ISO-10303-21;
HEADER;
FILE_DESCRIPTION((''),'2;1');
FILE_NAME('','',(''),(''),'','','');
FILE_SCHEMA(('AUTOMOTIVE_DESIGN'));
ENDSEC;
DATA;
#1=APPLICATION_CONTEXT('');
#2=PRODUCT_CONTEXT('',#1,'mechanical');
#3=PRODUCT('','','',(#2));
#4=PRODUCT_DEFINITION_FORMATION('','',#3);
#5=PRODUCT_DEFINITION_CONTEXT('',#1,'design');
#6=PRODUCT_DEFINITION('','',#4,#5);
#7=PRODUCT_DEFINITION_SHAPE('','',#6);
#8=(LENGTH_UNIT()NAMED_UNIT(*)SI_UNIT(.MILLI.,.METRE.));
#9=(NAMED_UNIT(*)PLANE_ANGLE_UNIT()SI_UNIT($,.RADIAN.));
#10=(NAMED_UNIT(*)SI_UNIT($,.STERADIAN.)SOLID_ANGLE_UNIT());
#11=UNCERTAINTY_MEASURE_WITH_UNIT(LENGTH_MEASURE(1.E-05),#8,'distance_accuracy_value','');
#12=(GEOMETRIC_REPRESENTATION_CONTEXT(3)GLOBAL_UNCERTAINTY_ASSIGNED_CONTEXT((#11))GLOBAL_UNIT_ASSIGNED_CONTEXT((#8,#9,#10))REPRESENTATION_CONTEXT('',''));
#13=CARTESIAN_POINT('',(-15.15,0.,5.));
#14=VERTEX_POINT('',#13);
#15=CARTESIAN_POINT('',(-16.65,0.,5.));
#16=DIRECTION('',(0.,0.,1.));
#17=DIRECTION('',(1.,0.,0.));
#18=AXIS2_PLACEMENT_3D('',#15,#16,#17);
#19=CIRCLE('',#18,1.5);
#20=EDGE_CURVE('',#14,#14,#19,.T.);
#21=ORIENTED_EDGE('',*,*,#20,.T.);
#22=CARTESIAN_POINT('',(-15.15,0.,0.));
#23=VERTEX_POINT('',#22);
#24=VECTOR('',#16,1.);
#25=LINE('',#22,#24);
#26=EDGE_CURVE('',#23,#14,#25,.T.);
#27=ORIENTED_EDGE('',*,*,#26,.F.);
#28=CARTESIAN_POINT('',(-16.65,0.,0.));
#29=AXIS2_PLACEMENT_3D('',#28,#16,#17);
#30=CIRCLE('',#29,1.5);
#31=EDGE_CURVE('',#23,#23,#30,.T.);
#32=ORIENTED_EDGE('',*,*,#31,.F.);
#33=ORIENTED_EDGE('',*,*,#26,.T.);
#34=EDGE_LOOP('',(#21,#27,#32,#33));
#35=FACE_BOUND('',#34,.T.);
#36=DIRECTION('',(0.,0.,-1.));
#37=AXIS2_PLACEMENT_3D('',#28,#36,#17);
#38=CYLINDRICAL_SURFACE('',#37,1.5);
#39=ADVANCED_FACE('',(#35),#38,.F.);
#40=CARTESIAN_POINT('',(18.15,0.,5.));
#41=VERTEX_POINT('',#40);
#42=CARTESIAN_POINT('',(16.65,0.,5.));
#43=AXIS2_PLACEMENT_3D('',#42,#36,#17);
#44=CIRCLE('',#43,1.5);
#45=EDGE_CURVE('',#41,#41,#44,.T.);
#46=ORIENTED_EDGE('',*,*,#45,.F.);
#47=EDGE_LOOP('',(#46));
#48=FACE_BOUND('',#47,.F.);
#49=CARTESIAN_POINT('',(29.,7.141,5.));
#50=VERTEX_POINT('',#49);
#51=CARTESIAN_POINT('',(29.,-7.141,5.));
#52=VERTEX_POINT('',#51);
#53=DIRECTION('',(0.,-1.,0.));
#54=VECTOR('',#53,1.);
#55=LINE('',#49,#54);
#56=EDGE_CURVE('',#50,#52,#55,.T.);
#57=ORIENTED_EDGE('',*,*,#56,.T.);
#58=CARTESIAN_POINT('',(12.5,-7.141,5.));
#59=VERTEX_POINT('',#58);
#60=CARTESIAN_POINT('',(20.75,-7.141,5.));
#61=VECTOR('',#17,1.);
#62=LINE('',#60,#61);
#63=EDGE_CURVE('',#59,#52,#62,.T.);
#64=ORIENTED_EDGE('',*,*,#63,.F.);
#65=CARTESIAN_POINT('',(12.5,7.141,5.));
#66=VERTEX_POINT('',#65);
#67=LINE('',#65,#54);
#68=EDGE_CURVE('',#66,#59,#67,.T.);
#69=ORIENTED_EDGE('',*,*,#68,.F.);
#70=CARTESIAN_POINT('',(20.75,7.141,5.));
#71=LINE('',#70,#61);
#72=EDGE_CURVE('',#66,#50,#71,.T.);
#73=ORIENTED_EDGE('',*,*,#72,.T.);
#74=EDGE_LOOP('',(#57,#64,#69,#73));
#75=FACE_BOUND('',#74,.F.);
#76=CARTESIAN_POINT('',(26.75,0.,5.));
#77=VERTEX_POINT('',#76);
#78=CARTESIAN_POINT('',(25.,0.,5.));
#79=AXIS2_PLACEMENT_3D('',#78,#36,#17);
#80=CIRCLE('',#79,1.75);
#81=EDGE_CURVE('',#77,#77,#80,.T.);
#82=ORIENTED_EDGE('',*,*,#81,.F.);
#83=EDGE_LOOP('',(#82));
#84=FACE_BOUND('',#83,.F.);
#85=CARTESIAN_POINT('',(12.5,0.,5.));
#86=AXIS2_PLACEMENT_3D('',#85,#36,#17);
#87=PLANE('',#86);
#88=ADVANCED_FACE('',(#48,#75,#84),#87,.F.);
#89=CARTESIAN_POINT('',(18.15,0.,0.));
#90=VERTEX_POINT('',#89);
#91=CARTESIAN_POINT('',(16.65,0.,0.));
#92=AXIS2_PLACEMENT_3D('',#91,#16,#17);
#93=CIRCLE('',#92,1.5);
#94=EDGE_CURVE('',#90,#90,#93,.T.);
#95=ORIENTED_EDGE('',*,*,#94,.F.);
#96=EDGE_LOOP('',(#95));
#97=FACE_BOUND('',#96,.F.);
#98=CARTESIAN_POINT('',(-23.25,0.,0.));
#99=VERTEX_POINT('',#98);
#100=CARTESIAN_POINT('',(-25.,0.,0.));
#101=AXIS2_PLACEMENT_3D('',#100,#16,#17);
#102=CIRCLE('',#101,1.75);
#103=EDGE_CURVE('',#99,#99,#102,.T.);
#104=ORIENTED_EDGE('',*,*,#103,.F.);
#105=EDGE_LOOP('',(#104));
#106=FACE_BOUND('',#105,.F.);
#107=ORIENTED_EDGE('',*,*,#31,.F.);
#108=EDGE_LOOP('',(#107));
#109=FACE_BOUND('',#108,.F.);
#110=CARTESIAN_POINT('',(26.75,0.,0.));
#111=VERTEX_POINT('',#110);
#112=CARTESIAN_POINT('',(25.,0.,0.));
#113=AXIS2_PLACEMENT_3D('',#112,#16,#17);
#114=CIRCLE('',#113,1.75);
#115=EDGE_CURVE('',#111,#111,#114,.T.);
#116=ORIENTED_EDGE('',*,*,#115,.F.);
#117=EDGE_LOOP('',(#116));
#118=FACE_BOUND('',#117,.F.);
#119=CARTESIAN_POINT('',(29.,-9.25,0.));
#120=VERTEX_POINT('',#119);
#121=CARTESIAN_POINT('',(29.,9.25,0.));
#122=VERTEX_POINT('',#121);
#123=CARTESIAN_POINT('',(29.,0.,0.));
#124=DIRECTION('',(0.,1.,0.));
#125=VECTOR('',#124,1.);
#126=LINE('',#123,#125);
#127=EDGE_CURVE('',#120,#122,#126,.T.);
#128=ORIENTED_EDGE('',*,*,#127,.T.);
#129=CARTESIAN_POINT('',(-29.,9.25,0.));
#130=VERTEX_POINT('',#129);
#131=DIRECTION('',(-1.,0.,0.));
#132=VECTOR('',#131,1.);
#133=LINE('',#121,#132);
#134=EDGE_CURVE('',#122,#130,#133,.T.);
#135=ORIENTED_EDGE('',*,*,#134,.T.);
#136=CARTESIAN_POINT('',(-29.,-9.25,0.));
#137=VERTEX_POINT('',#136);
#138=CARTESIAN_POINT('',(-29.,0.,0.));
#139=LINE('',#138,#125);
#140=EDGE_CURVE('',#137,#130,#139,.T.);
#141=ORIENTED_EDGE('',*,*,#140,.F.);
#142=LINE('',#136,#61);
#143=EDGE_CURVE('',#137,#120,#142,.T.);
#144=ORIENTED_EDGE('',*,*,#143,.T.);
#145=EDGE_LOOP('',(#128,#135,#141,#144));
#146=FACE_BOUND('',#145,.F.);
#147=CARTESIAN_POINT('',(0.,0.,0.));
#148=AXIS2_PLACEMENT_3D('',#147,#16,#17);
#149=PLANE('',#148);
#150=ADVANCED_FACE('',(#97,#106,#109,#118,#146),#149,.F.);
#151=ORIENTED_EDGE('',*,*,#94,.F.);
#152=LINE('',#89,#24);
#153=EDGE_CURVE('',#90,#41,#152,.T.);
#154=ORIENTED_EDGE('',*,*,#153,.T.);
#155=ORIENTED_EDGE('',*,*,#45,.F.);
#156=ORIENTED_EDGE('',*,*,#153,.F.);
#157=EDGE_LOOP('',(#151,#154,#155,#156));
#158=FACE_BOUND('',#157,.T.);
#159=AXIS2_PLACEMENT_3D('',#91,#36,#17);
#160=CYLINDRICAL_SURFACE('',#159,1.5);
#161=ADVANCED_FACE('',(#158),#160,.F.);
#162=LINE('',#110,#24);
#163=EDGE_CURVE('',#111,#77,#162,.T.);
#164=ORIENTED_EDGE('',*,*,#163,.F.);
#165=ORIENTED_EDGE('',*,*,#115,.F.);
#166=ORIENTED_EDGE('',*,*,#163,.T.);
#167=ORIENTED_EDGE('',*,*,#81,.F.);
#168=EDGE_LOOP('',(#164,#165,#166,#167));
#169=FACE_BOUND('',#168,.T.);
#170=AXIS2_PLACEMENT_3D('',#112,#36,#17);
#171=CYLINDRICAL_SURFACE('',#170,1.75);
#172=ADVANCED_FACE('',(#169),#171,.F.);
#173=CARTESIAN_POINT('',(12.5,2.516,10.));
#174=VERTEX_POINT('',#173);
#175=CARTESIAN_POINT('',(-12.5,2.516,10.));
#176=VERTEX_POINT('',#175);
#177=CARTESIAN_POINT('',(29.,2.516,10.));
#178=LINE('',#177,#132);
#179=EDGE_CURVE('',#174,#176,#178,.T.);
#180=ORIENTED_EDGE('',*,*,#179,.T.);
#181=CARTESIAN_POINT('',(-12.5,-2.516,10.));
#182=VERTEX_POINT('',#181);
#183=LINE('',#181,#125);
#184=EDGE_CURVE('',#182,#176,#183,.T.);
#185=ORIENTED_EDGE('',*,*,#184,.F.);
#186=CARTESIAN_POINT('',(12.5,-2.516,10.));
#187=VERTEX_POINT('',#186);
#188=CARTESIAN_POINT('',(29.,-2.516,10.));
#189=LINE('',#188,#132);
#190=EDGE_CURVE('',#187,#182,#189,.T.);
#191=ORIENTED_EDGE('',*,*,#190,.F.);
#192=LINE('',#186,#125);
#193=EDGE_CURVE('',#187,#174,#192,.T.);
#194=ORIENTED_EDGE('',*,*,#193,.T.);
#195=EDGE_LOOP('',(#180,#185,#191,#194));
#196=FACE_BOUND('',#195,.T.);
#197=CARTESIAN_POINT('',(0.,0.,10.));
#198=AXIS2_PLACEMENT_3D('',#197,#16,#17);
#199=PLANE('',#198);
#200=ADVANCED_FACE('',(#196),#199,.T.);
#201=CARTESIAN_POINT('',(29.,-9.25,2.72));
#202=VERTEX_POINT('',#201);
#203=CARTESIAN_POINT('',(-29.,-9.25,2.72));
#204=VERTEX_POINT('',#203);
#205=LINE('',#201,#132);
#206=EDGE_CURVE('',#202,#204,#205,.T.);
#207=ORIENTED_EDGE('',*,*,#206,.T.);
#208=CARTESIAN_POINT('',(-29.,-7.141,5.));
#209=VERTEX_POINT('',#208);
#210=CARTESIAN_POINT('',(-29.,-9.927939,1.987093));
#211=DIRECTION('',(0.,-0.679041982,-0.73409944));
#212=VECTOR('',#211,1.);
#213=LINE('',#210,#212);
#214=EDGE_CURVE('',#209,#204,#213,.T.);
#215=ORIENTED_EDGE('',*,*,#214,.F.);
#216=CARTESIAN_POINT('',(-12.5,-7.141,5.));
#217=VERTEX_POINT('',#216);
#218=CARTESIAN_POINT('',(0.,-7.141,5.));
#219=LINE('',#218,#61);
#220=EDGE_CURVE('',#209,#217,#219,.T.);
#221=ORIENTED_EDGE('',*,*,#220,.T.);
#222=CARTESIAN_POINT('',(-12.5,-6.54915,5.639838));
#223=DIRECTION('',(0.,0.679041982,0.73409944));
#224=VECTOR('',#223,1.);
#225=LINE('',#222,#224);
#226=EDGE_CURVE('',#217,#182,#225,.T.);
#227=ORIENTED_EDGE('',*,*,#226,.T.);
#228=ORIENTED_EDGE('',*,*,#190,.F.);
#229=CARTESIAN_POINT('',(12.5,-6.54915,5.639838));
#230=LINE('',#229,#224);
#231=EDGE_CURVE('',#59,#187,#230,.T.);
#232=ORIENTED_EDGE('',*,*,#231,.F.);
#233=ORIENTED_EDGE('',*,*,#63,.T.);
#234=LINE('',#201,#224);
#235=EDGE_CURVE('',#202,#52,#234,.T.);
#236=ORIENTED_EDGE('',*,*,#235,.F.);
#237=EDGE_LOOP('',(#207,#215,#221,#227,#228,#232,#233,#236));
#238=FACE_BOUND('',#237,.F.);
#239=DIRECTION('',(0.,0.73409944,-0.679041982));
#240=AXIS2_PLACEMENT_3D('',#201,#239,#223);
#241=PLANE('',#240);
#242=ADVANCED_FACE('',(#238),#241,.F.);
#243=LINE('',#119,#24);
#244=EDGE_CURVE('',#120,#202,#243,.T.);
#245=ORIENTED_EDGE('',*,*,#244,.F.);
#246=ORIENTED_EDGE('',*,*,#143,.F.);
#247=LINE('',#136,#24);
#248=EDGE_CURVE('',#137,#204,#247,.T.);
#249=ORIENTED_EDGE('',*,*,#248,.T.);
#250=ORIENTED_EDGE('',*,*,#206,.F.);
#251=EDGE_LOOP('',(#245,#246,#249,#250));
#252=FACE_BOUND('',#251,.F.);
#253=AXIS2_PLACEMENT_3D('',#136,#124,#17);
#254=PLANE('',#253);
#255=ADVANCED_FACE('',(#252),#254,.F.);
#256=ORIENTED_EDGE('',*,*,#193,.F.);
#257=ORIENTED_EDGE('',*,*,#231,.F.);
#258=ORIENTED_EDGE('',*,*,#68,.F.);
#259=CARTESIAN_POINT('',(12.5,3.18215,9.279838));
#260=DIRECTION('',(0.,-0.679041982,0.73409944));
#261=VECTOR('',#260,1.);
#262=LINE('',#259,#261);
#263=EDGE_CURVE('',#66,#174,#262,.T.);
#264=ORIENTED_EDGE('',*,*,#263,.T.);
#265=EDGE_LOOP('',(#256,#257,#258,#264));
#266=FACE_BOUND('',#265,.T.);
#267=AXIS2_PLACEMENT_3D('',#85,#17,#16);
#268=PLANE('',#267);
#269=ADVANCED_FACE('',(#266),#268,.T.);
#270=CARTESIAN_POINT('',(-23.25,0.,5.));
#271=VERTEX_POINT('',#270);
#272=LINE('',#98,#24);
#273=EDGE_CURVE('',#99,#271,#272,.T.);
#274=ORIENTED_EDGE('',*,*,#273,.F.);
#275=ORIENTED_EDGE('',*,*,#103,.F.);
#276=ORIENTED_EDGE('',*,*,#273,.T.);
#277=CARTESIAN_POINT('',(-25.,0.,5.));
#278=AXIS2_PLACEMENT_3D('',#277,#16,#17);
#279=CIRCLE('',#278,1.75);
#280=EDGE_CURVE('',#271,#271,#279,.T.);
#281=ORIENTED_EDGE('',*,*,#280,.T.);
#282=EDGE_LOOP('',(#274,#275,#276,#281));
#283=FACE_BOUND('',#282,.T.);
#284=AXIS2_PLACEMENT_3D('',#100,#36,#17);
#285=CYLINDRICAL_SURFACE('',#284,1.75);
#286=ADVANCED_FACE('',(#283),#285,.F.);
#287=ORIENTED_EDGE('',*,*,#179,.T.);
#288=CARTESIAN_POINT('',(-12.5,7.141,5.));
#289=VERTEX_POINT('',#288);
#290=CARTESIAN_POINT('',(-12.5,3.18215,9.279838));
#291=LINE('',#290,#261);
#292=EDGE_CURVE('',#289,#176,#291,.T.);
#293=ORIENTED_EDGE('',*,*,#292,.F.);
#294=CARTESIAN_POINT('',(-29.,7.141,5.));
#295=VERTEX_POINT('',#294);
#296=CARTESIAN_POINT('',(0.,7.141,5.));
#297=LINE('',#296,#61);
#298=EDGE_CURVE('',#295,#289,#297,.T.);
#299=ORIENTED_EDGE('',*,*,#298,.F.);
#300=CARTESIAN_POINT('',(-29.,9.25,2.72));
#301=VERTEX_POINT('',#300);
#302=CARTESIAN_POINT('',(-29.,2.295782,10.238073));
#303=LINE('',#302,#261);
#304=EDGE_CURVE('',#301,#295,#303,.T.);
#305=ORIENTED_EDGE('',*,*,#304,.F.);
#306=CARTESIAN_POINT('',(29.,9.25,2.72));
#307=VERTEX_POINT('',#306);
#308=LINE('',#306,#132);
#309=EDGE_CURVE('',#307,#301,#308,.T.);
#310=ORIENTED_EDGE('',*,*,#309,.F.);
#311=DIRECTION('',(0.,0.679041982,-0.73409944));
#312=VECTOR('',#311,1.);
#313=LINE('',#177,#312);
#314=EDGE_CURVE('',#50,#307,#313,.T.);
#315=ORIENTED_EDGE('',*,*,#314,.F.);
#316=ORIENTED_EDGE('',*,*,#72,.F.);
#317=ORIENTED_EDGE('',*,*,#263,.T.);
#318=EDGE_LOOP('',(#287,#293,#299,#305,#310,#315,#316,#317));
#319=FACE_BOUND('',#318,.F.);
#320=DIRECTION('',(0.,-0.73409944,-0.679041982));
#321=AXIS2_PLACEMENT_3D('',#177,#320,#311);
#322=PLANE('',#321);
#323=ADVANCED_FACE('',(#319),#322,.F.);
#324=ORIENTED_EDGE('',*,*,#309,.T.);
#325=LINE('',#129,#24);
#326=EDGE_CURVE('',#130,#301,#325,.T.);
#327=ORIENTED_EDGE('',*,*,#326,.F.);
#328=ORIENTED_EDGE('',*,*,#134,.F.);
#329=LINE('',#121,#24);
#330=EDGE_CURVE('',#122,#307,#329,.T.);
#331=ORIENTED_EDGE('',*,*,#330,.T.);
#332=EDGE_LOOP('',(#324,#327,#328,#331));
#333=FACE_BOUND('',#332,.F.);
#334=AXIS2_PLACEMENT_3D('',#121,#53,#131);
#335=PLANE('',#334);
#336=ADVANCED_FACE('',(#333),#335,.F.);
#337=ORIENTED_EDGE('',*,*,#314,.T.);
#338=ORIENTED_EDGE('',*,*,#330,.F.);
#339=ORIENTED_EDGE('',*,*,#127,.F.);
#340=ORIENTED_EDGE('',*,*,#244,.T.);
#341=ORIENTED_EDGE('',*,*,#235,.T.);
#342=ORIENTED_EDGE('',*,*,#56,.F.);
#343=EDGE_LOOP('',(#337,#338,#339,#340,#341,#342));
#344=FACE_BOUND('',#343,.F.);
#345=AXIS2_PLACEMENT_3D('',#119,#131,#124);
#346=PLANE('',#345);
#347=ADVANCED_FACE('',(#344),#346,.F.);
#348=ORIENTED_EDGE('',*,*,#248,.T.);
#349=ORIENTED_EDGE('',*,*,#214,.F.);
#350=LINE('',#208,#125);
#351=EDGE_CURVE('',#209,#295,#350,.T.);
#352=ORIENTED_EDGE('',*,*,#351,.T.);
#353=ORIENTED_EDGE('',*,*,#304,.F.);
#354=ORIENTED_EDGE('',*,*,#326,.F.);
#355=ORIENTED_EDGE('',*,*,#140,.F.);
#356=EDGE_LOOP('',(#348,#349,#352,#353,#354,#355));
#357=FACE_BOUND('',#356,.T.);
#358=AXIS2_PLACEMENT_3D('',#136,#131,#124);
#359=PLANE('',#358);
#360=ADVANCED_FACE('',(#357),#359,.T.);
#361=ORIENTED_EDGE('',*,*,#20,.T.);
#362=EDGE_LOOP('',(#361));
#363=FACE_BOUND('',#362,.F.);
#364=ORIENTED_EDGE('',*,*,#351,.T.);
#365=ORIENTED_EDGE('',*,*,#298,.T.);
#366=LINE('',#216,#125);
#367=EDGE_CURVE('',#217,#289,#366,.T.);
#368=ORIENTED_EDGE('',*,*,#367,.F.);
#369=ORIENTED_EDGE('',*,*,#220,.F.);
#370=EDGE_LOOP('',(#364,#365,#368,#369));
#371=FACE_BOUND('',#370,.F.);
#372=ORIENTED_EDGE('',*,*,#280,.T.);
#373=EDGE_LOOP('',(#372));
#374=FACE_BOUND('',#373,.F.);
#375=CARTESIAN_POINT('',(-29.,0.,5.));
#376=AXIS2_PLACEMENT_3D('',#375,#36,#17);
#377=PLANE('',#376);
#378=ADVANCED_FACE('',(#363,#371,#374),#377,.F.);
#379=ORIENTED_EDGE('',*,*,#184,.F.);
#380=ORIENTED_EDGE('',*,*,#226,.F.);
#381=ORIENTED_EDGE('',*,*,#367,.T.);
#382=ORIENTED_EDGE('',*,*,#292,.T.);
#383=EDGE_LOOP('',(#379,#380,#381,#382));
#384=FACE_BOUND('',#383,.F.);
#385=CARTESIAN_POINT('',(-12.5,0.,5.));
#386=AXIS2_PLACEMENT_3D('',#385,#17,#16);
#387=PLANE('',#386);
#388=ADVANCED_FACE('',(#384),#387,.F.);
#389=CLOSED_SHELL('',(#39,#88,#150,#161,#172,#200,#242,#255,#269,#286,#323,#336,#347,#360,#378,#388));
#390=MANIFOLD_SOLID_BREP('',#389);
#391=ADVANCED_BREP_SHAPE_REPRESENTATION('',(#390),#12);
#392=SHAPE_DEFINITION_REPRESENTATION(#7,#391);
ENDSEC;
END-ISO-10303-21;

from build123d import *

# Parameters (mm, degrees)
F0_W          = 38
F0_H          = 18.5
F0_R          = 1.5
F0_W_2        = 10
F0_R_2        = 1.75
F1_DEPTH      = 10
F3_DEPTH      = 58.001
F4_W          = 16.5
F4_H          = 12
F5_DEPTH      = 25
F5_DEPTH_BACK = 25


with BuildPart() as f1:
    # F0 (on Top) → F1 (new body)
    with BuildSketch(Plane.XY):
        Rectangle(F0_W, F0_H)
        with Locations((-16.65, 0)):
            Circle(F0_R, mode=Mode.SUBTRACT)
        with Locations((16.65, 0)):
            Circle(F0_R, mode=Mode.SUBTRACT)
        with Locations((24, 0)):
            Rectangle(F0_W_2, F0_H)
        with Locations((25, 0)):
            Circle(F0_R_2, mode=Mode.SUBTRACT)
        with Locations((-24, 0)):
            Rectangle(F0_W_2, F0_H)
        with Locations((-25, 0)):
            Circle(F0_R_2, mode=Mode.SUBTRACT)
    extrude(amount=F1_DEPTH)

    # F2 (on face) → F3 (cut, through all)
    with BuildSketch(Plane.YZ.offset(29)):
        Polygon((-9.25, 10), (-9.25, 2.72), (-4.625, 7.72), (-2.516, 10), align=None)
        Polygon((2.516, 10), (4.625, 7.72), (9.25, 2.72), (9.25, 10), align=None)
    extrude(amount=-F3_DEPTH, mode=Mode.SUBTRACT)

    # F4 (on Front) → F5 (cut, two sides)
    with BuildSketch(Plane.XZ) as f5_sk:
        with Locations((-20.75, 11)):
            Rectangle(F4_W, F4_H)
        with Locations((20.75, 11)):
            Rectangle(F4_W, F4_H)
    extrude(amount=F5_DEPTH, mode=Mode.SUBTRACT)
    extrude(f5_sk.sketch, amount=-F5_DEPTH_BACK, mode=Mode.SUBTRACT)


solid = f1.part
